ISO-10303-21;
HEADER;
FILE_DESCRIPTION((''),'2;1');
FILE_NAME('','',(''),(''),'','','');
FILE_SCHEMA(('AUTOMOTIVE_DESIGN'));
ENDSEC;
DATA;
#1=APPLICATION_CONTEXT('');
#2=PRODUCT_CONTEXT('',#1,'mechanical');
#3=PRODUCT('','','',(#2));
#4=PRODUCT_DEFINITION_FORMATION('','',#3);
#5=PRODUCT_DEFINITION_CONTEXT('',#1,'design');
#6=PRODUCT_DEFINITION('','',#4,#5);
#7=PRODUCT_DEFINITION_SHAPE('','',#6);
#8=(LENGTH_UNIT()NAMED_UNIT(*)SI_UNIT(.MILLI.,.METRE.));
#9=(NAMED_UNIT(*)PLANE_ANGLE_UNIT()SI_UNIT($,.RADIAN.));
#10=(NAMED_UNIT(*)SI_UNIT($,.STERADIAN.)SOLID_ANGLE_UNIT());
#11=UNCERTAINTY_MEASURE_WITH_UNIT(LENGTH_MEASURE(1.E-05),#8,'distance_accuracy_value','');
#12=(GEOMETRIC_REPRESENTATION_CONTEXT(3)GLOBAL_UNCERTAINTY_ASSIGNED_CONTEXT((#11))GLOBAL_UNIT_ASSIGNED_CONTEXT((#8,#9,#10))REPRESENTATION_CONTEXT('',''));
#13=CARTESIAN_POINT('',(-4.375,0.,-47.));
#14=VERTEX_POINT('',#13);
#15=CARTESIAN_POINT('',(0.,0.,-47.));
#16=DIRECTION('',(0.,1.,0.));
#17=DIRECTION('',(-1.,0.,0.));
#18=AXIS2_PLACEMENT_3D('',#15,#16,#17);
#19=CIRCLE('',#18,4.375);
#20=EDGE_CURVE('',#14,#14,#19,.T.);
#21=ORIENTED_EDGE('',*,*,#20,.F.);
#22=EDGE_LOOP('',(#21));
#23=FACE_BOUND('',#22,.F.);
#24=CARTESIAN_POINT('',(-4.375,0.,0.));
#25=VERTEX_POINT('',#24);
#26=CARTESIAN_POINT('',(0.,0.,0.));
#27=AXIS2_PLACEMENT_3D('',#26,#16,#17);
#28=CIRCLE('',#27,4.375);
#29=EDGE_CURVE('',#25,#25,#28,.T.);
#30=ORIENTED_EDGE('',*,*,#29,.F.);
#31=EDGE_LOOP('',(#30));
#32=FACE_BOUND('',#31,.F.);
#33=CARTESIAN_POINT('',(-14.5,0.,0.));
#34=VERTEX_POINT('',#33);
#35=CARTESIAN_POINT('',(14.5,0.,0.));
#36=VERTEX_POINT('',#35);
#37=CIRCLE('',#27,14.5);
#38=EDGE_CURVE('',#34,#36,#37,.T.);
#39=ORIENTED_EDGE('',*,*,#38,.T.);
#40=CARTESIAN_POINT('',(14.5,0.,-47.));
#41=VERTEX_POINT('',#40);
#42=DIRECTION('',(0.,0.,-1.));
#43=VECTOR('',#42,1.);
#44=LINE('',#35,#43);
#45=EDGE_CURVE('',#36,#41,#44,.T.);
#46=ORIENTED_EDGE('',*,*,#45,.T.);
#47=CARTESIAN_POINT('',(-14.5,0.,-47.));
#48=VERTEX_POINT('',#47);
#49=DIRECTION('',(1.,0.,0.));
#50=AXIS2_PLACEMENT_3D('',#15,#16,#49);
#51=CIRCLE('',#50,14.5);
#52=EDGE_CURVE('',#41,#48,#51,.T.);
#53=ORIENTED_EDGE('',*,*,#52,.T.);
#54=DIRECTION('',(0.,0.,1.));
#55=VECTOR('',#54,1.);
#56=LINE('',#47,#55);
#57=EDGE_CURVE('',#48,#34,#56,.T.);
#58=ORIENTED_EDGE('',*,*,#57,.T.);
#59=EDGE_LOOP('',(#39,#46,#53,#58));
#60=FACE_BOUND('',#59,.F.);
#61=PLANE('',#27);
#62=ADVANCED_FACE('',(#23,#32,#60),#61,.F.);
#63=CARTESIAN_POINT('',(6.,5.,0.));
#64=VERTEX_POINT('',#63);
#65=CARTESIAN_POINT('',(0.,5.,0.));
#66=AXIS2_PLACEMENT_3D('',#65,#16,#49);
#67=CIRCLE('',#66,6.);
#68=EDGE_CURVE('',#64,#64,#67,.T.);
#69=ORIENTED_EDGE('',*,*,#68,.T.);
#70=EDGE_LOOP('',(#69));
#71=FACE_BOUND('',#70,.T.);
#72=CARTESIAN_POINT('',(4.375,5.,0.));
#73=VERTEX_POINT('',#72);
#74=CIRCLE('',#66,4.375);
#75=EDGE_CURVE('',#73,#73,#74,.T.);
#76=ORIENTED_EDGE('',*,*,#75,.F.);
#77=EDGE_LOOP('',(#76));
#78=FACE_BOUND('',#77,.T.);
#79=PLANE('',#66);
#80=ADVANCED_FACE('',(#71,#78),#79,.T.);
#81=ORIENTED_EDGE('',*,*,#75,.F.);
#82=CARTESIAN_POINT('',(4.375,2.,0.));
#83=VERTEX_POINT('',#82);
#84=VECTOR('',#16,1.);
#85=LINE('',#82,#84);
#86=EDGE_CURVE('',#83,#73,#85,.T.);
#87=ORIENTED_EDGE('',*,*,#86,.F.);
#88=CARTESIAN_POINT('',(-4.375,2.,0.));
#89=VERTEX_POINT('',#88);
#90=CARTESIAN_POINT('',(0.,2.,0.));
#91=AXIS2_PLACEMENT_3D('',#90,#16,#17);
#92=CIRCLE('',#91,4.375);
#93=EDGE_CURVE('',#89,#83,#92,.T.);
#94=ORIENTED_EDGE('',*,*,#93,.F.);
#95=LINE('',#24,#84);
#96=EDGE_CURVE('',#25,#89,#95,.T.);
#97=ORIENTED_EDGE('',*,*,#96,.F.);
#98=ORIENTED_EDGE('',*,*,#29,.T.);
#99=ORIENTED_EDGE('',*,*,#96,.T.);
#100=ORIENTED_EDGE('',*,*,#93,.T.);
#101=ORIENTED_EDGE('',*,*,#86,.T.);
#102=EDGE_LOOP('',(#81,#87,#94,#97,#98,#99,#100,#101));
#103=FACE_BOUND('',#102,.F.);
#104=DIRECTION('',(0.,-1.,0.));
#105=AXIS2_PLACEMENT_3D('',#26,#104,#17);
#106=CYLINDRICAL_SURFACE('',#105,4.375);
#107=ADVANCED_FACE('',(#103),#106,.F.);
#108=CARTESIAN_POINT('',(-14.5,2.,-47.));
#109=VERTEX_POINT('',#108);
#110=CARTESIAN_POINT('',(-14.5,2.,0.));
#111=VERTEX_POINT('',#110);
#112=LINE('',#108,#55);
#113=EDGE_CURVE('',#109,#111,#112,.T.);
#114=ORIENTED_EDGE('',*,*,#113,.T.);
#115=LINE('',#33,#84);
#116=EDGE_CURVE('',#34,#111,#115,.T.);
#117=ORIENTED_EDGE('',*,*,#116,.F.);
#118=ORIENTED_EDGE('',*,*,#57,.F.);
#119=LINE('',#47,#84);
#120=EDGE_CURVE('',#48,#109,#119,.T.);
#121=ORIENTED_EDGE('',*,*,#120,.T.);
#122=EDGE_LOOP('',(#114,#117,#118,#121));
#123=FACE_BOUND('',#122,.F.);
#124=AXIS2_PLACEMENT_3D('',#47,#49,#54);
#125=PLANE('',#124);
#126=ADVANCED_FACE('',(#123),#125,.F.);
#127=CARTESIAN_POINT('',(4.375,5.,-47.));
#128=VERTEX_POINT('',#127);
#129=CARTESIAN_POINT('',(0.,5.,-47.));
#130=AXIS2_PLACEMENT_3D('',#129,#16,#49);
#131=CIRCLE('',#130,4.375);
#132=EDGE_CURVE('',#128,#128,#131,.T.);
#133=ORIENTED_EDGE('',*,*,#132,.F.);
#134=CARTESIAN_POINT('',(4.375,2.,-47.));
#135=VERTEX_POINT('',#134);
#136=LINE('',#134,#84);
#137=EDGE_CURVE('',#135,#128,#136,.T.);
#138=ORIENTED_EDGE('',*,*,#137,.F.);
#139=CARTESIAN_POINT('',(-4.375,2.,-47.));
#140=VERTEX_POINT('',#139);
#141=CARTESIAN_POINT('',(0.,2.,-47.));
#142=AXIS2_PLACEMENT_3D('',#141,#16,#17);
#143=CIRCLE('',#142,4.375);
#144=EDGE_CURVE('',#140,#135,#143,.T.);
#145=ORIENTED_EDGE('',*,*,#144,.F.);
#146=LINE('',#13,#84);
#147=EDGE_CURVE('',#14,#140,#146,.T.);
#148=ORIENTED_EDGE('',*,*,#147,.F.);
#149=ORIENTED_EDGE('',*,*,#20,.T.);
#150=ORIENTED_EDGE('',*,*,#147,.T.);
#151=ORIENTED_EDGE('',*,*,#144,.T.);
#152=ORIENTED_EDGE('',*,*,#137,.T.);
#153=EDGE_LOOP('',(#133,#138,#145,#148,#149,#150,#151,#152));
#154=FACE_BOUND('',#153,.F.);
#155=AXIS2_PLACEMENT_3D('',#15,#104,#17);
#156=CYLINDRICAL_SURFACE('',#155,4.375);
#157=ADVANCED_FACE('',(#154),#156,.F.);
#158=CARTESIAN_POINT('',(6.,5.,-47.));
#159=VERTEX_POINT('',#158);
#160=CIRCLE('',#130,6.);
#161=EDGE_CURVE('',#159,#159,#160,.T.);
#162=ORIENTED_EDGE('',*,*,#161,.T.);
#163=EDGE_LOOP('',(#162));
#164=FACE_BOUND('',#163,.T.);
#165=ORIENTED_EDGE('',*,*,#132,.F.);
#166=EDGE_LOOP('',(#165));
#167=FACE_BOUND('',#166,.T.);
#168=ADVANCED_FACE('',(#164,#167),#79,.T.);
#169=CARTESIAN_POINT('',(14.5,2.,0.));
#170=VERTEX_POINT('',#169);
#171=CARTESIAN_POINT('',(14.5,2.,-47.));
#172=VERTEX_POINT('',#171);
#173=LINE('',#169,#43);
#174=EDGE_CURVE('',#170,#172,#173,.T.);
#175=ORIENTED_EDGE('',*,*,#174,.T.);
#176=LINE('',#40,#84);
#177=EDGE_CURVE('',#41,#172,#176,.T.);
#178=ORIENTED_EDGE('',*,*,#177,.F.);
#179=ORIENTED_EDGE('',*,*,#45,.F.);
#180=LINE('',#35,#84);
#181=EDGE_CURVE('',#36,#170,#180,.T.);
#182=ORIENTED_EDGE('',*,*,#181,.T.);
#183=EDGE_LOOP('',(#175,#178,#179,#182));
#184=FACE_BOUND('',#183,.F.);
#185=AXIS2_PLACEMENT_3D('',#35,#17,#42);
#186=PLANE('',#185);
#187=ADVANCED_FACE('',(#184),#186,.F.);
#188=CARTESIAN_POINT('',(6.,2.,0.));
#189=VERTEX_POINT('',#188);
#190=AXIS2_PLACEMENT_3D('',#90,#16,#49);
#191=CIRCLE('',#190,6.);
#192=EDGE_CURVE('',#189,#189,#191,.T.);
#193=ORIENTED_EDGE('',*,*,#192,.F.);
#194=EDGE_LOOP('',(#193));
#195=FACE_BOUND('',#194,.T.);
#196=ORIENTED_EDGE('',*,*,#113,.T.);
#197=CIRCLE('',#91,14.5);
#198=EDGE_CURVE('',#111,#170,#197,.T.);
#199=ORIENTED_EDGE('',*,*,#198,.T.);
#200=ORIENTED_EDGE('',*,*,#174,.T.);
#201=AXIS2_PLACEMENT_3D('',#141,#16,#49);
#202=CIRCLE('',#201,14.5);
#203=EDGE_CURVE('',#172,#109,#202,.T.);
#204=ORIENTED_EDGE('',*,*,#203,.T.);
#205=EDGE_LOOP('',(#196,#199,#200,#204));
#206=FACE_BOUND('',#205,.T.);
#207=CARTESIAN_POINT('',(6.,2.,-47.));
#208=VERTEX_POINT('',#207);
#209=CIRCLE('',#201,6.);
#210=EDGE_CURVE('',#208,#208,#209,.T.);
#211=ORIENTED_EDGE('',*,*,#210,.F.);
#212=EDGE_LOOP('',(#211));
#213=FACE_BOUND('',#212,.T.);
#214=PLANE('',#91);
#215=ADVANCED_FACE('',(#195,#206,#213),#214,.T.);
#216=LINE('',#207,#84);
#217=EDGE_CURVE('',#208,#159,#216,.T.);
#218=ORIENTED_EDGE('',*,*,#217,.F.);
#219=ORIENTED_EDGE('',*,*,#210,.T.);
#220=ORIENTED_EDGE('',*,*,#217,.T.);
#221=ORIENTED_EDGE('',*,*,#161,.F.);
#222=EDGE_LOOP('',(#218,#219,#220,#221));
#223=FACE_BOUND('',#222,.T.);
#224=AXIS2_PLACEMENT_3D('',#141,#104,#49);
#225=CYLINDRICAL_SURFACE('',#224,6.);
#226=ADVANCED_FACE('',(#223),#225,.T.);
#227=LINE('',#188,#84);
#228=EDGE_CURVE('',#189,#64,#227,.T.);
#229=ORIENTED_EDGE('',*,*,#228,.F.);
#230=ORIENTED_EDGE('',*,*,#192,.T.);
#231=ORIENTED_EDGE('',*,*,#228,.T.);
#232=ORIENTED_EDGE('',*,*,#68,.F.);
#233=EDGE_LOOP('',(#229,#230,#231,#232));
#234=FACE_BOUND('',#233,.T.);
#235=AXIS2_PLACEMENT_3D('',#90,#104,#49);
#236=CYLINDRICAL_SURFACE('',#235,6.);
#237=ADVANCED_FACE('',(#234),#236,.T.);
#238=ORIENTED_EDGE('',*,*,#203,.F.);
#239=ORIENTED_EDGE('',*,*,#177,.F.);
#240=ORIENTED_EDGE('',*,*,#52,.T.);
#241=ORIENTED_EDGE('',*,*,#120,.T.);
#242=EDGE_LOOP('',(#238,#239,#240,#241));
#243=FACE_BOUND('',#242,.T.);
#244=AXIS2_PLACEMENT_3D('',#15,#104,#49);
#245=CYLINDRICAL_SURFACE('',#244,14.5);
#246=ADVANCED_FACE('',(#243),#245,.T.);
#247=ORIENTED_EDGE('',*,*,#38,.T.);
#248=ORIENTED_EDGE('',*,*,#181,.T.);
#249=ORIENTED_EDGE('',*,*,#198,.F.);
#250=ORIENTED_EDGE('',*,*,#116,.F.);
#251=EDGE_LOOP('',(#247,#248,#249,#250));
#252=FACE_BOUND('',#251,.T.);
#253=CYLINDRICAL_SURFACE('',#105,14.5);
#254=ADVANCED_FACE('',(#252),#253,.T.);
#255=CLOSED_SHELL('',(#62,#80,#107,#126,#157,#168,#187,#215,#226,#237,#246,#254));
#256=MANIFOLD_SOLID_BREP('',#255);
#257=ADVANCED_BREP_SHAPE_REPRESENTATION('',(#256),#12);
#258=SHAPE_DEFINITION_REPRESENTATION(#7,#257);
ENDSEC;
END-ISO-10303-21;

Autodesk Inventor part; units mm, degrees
ref_plane "YZ Plane" through (0, 0, 0) normal (1, 0, 0) x (0, 1, 0)
ref_plane "XZ Plane" through (0, 0, 0) normal (0, 1, 0) x (-1, 0, 0)
ref_plane "XY Plane" through (0, 0, 0) normal (0, 0, 1) x (1, 0, 0)
sketch "Sketch3" plane through (0, 0, 0) normal (0, 1, 0) x (-1, 0, 0)
  line L0 (0, 0) -> (0, -47) construction
  line L1 (-14.5, 0) -> (-14.5, -47)
  line L2 (14.5, -47) -> (14.5, 0)
  arc A0 (14.5, 0) -> (-14.5, 0) centre (0, 0) ccw
  arc A1 (-14.5, -47) -> (14.5, -47) centre (0, -47) ccw
  line L3 (0, 0) -> (47, 0) construction
  circle A2 centre (0, 0) radius 4.375
  circle A3 centre (0, -47) radius 4.375
  point P0 (0, -23.5)
  dimension "d8" = 47
  dimension "d9" = 90
  dimension "d10" = 29
  dimension "d11" = 8.75
  dimension "d12" = 8.75
extrude "Extrusion3" add sketch "Sketch3" along normal blind 2
sketch "Sketch4" plane through (0, 2, 0) normal (0, 1, 0) x (1, 0, 0)
  circle A0 centre (0, 0) radius 4.375 projected
  circle A1 centre (0, 0) radius 2.75
  circle A2 centre (0, 47) radius 4.375 projected
  circle A3 centre (0, 47) radius 2.75
  circle A4 centre (0, 0) radius 6
  circle A5 centre (0, 47) radius 6
  dimension "d15" = 12
  dimension "d16" = 12
extrude "Extrusion4" add sketch "Sketch4" along normal blind 3 contours A4 | A5
properties part number "Belt_Washer"
